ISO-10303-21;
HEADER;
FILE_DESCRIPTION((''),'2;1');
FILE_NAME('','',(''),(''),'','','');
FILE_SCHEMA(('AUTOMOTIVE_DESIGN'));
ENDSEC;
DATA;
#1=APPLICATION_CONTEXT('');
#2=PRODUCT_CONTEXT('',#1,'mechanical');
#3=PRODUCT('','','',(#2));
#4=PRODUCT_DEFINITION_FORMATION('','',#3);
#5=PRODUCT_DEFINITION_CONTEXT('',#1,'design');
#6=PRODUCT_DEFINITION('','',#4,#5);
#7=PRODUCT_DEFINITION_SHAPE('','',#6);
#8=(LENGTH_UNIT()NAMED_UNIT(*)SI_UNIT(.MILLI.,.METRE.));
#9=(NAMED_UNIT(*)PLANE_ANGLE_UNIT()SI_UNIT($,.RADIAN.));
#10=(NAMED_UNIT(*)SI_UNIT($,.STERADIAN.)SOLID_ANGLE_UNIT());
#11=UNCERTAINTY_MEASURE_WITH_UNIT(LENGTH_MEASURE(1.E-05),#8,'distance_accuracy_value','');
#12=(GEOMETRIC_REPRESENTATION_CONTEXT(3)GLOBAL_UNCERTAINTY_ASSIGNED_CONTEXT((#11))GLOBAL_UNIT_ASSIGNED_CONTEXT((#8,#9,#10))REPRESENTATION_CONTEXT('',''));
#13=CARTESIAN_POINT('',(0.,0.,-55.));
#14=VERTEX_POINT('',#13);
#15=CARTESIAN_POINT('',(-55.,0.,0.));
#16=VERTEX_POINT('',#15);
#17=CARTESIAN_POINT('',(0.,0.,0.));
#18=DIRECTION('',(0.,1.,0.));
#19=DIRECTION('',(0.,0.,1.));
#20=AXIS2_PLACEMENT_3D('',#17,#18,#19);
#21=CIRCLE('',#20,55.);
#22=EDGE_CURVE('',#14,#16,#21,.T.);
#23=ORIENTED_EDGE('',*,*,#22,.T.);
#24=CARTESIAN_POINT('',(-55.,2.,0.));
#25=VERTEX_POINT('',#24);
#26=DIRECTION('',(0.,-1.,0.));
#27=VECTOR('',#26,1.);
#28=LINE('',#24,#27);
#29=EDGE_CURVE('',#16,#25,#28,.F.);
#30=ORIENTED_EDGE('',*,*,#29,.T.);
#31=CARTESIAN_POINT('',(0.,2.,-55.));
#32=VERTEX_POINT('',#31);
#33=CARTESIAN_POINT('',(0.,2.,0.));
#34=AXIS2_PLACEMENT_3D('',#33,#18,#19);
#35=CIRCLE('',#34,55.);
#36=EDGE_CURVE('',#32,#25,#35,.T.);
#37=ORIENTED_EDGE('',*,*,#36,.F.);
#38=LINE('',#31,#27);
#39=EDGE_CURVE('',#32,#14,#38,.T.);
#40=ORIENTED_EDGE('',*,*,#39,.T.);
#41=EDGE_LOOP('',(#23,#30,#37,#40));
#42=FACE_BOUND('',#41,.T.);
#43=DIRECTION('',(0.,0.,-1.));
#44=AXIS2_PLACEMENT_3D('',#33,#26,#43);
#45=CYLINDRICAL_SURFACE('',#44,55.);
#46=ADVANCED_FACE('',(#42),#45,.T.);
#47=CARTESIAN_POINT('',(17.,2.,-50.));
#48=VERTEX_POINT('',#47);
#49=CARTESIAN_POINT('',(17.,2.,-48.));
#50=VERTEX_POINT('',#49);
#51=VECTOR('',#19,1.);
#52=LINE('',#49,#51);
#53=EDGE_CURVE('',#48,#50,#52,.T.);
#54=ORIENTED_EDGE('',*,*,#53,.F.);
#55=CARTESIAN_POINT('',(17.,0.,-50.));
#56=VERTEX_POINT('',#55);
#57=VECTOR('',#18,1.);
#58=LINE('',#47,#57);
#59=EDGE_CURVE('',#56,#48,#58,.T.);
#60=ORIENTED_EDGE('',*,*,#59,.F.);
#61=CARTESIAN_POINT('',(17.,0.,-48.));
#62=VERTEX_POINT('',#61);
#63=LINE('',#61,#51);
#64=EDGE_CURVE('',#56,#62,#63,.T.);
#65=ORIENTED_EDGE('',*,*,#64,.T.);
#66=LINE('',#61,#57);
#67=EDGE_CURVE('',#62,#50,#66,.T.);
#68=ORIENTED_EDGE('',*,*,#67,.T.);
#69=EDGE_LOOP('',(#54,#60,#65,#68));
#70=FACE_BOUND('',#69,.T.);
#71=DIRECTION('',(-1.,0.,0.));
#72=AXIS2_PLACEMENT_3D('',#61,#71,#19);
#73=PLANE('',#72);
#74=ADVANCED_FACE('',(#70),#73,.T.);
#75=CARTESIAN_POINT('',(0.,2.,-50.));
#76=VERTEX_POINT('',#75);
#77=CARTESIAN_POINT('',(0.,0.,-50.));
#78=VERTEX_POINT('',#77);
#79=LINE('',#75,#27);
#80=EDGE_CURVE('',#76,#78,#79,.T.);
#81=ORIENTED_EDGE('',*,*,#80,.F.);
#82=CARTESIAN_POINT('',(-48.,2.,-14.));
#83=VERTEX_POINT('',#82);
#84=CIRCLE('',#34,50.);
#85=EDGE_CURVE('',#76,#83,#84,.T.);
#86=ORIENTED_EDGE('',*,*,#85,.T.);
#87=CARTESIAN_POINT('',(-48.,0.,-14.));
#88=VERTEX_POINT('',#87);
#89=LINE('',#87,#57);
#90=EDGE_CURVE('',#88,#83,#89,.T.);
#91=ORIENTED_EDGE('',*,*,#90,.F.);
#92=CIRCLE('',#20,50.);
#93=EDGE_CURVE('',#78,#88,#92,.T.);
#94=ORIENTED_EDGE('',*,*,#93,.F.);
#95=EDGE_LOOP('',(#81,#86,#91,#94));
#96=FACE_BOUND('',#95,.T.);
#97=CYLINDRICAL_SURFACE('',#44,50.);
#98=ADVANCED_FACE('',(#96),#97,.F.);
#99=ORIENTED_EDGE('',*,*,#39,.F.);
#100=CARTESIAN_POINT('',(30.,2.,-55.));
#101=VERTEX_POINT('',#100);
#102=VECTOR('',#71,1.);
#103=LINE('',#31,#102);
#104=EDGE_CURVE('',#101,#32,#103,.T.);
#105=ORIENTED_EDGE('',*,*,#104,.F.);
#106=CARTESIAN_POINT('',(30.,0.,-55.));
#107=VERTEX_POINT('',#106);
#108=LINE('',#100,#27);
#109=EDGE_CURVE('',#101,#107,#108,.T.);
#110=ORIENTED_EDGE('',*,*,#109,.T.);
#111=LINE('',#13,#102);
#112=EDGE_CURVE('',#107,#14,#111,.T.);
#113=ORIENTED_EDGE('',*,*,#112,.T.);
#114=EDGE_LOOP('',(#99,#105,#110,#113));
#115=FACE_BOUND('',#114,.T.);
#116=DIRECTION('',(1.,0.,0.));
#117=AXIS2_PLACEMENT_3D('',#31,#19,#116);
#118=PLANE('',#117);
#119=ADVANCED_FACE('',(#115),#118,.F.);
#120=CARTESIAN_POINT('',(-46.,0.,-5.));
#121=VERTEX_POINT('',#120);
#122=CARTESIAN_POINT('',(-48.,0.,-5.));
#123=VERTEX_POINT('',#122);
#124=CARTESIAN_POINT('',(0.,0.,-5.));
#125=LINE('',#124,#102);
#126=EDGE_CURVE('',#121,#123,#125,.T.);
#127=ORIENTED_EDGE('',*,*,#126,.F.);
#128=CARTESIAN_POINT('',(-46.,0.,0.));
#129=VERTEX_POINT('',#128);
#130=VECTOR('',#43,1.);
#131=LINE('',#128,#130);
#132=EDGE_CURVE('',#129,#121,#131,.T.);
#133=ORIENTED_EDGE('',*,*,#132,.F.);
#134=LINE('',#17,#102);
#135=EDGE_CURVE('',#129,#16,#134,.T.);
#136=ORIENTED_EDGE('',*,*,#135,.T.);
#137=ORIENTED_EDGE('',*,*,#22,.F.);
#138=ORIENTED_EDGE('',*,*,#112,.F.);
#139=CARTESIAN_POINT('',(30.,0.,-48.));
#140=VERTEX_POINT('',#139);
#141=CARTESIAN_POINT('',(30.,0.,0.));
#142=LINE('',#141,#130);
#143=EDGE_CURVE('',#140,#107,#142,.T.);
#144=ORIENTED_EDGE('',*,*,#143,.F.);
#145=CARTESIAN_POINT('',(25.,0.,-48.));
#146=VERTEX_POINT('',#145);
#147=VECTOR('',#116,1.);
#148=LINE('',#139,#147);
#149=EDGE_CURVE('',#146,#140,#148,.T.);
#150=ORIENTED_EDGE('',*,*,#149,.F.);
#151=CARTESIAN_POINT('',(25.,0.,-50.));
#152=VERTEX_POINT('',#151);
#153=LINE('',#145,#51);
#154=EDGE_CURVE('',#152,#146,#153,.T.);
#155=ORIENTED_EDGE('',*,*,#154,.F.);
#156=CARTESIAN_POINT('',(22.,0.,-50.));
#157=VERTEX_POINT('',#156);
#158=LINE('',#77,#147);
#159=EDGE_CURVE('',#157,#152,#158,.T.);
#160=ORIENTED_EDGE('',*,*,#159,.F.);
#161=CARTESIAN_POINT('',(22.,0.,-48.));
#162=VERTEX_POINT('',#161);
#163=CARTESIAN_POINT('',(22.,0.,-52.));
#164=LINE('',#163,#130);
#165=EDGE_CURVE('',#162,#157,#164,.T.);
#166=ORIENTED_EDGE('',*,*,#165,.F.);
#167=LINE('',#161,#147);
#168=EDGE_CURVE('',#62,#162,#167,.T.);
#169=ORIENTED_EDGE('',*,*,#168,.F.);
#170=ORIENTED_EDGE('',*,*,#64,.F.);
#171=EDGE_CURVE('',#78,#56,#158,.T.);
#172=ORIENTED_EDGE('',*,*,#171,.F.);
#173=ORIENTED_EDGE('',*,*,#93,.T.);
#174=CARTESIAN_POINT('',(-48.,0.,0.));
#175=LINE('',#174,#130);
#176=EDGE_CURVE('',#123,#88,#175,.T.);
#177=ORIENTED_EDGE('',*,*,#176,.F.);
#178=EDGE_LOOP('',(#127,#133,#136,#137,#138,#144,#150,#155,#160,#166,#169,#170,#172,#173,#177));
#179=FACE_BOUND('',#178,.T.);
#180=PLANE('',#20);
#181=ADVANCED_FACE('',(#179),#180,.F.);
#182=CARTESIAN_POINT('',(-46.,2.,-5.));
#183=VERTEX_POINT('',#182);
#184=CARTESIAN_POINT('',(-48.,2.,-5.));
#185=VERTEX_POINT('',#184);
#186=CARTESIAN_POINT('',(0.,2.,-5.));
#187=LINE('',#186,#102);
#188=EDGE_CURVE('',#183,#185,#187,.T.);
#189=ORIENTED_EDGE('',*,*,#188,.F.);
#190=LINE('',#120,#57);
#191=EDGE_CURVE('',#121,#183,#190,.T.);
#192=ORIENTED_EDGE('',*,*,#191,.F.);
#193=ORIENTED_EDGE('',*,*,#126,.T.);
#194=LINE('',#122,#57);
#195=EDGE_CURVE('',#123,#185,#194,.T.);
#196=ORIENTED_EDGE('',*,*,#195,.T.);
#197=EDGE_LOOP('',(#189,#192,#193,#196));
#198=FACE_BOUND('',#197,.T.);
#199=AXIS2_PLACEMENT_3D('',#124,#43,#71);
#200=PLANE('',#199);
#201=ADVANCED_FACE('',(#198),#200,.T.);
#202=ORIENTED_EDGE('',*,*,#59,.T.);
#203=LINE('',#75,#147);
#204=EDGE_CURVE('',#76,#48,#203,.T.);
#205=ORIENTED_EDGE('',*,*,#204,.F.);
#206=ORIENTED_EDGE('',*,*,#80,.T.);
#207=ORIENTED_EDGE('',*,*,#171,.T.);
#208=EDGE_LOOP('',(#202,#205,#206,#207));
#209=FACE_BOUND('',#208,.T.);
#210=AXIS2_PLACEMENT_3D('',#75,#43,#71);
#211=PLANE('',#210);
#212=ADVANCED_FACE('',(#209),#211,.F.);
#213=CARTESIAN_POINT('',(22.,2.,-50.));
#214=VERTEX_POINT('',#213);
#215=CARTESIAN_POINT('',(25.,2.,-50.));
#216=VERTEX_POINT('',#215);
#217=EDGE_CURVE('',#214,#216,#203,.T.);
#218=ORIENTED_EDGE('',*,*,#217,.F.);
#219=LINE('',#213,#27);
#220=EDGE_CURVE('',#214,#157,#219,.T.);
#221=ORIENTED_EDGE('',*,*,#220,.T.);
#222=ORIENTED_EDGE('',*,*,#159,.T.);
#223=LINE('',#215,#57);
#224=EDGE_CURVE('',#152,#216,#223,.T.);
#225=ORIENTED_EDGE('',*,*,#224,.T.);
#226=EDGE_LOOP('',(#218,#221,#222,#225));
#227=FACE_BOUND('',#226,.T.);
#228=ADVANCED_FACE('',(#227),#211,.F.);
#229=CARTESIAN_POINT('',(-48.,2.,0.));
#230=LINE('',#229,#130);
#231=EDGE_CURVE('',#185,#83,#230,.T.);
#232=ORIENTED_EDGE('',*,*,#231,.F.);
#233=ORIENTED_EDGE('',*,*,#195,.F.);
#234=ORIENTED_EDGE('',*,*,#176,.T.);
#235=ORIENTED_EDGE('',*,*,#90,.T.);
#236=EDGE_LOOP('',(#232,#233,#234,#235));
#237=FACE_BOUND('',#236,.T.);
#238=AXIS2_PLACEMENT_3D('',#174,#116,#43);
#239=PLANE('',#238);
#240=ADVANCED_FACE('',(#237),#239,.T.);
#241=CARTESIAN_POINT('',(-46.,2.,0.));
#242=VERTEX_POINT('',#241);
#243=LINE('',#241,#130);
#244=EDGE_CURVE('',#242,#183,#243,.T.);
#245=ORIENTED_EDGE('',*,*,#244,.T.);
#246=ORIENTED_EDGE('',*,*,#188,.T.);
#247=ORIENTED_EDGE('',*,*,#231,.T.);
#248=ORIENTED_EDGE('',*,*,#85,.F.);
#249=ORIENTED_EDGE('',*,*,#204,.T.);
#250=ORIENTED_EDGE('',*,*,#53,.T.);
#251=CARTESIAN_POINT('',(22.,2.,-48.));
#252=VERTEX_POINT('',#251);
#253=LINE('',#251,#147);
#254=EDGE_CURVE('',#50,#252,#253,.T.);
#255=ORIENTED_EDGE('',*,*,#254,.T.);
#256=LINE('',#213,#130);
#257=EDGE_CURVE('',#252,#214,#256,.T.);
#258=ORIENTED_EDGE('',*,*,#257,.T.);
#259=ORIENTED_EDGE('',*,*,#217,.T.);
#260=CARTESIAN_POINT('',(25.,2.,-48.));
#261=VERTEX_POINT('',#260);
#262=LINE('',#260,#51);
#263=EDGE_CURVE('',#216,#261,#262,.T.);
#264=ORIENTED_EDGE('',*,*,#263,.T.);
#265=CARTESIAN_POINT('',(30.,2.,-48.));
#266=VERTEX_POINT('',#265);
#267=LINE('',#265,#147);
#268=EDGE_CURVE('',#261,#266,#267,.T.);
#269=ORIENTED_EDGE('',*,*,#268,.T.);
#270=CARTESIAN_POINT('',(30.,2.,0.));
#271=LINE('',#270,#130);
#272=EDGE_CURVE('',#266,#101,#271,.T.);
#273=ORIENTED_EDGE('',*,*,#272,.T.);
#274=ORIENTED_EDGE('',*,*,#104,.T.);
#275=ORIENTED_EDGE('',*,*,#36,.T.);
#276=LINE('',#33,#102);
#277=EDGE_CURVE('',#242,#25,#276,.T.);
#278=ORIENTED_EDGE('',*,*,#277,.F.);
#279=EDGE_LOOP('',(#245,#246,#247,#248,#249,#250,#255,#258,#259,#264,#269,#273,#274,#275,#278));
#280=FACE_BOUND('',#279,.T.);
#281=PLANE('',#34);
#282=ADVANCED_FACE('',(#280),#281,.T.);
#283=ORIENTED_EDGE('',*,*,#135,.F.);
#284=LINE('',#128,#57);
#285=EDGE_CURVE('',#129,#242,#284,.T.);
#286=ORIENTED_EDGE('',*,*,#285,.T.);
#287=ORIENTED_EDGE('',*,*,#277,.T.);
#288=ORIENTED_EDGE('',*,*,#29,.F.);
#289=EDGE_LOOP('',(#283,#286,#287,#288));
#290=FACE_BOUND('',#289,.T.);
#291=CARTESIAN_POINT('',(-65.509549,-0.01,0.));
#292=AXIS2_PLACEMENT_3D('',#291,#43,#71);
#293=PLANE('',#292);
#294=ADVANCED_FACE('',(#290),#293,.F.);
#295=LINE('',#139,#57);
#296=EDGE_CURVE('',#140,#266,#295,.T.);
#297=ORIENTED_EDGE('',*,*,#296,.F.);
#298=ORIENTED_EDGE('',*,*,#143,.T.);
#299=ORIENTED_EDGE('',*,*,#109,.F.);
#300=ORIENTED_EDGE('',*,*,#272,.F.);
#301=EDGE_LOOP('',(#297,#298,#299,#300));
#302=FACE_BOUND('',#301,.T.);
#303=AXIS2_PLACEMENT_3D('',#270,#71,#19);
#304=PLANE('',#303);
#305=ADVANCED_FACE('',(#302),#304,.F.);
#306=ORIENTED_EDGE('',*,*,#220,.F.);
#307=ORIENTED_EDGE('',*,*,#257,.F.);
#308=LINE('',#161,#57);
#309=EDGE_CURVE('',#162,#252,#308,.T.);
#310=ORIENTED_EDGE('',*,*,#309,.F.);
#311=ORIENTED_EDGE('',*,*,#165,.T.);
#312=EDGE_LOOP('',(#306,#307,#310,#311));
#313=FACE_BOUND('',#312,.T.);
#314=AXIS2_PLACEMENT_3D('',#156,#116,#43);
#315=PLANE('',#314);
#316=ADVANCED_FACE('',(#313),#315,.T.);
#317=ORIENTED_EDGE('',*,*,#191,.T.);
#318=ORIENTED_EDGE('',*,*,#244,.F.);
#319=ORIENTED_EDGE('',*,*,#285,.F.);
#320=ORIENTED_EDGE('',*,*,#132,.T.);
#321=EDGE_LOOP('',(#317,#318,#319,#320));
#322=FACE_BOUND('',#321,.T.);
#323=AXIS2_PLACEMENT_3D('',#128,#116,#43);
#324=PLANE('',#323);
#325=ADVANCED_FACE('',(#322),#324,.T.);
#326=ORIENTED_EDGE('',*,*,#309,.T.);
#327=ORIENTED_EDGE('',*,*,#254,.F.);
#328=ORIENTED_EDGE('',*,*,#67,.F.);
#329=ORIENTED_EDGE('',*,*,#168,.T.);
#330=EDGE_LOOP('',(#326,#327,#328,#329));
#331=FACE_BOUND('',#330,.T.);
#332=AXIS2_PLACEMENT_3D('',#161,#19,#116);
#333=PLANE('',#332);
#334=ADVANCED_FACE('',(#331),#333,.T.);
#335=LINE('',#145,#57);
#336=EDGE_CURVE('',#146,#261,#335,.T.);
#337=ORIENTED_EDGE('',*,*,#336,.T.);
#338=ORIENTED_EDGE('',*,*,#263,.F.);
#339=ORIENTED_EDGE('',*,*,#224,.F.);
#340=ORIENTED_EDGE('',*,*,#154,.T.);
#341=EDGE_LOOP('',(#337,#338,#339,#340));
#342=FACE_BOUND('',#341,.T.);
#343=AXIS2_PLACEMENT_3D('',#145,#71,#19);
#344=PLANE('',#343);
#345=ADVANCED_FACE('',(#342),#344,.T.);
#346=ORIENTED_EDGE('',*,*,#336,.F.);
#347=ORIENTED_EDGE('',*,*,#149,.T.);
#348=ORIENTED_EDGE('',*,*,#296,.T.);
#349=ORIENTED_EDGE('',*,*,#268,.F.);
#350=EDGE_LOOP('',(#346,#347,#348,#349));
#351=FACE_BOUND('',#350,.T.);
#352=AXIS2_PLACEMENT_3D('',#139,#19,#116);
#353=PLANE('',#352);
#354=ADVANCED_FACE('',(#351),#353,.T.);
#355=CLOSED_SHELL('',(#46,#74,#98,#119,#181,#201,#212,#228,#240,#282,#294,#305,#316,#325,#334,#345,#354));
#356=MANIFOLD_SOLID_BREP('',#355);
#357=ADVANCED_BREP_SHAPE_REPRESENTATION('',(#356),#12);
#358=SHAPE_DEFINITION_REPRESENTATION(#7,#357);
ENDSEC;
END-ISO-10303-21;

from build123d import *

# Parameters (mm, degrees)
SKETCH1_R              = 50
BOSS_EXTRUDE2_DEPTH    = 2
SPLIT1_SURFACE_1_BACK  = 156.576
SPLIT1_SURFACE_1_DEPTH = 313.152
SPLIT1_SURFACE_2_BACK  = 156.576
SPLIT1_SURFACE_2_DEPTH = 313.152
BODY_DELETE1_DEPTH     = 2
BOSS_EXTRUDE3_DEPTH    = 2
BOSS_EXTRUDE5_START    = -2
SKETCH4_W              = 2
SKETCH4_H              = 5
BOSS_EXTRUDE5_DEPTH    = 2


# Read off the part's stored shape, not the designer's step: Body-Delete1
with BuildPart() as part:
    # Sketch1 → Boss-Extrude2 (new body)
    with BuildSketch(Plane(origin=(0, 0, 0), x_dir=(1, 0, 0), z_dir=(0, 1, 0))):
        with BuildLine():
            Line((22.912878475, 50), (30, 50))
            Line((30, 50), (30, 55))
            Line((30, 55), (0, 55))
            ThreePointArc((0, 55), (-11.7260394, -53.735463151), (22.912878475, 50))
        make_face()
        with Locations(Location((0, 0, 0), (0, 0, 270))):
            Circle(SKETCH1_R, mode=Mode.SUBTRACT)
    extrude(amount=BOSS_EXTRUDE2_DEPTH)


with BuildPart() as body_2:
    # Split1: the piece behind the surface
    add(part.part)
    # Split1 surface: a surface, the sketch's curves swept straight by 313.152 mm
    with BuildLine(Plane(origin=(0, 2, 0), x_dir=(1, 0, 0), z_dir=(0, 1, 0)).offset(-SPLIT1_SURFACE_1_BACK), mode=Mode.PRIVATE) as split1_surface_1_path:
        Line((0, 50), (71.831983425, 50))
        Line((71.831983425, 50), (71.831983425, -59.181674134))
        Line((71.831983425, -59.181674134), (-65.509549092, -59.181674134))
        Line((-65.509549092, -59.181674134), (-65.509549092, 0))
        Line((-65.509549092, 0), (0, 0))
        Line((0, 0), (0, 50))
    split1_surface_1 = Shell.extrude(split1_surface_1_path.wire(), (0 * SPLIT1_SURFACE_1_DEPTH, 1 * SPLIT1_SURFACE_1_DEPTH, 0 * SPLIT1_SURFACE_1_DEPTH))
    split(bisect_by=split1_surface_1, keep=Keep.BOTTOM)

    # Body-Delete1 outline → Body-Delete1 (cut)
    with BuildSketch(Plane(origin=(0, 0, 0), x_dir=(1, 0, 0), z_dir=(0, 1, 0))):
        with BuildLine():
            ThreePointArc((-55, 0), (29.705148408, -46.28827236), (22.912878475, 50))
            Line((22.912878475, 50), (0, 50))
            ThreePointArc((0, 50), (35.355339059, -35.355339059), (-50, 0))
            Line((-50, 0), (-55, 0))
        make_face()
    extrude(amount=BODY_DELETE1_DEPTH, mode=Mode.SUBTRACT)


with BuildPart() as part_1:
    add(part.part)

    # Split1: split by a surface, the side it looks to stays
    # Split1 surface: a surface, the sketch's curves swept straight by 313.152 mm
    with BuildLine(Plane(origin=(0, 2, 0), x_dir=(1, 0, 0), z_dir=(0, 1, 0)).offset(-SPLIT1_SURFACE_2_BACK), mode=Mode.PRIVATE) as split1_surface_2_path:
        Line((0, 50), (71.831983425, 50))
        Line((71.831983425, 50), (71.831983425, -59.181674134))
        Line((71.831983425, -59.181674134), (-65.509549092, -59.181674134))
        Line((-65.509549092, -59.181674134), (-65.509549092, 0))
        Line((-65.509549092, 0), (0, 0))
        Line((0, 0), (0, 50))
    split1_surface_2 = Shell.extrude(split1_surface_2_path.wire(), (0 * SPLIT1_SURFACE_2_DEPTH, 1 * SPLIT1_SURFACE_2_DEPTH, 0 * SPLIT1_SURFACE_2_DEPTH))
    split(bisect_by=split1_surface_2, keep=Keep.TOP)

    # Sketch3 → Boss-Extrude3 (add)
    with BuildSketch(Plane(origin=(0, 2, 0), x_dir=(1, 0, 0), z_dir=(0, 1, 0))):
        Polygon((30, 50), (30, 48), (25, 48), (25, 52), (30, 52), align=None)
        Polygon((22, 50), (22, 48), (17, 48), (17, 52), (22, 52), align=None)
    extrude(amount=-BOSS_EXTRUDE3_DEPTH)

    # Sketch4 → Boss-Extrude5 (add)
    with BuildSketch(Plane(origin=(0, 2, 0), x_dir=(1, 0, 0), z_dir=(0, 1, 0)).offset(BOSS_EXTRUDE5_START)):
        with Locations((-47, 2.5)):
            Rectangle(SKETCH4_W, SKETCH4_H)
        with BuildLine():
            ThreePointArc((-48, 14), (-49.497474683, 7.071067812), (-50, 0))
            Line((-50, 0), (-48, 0))
            Line((-48, 0), (-48, 5))
            Line((-48, 5), (-48, 14))
        make_face()
    extrude(amount=BOSS_EXTRUDE5_DEPTH)


solid = part_1.part
